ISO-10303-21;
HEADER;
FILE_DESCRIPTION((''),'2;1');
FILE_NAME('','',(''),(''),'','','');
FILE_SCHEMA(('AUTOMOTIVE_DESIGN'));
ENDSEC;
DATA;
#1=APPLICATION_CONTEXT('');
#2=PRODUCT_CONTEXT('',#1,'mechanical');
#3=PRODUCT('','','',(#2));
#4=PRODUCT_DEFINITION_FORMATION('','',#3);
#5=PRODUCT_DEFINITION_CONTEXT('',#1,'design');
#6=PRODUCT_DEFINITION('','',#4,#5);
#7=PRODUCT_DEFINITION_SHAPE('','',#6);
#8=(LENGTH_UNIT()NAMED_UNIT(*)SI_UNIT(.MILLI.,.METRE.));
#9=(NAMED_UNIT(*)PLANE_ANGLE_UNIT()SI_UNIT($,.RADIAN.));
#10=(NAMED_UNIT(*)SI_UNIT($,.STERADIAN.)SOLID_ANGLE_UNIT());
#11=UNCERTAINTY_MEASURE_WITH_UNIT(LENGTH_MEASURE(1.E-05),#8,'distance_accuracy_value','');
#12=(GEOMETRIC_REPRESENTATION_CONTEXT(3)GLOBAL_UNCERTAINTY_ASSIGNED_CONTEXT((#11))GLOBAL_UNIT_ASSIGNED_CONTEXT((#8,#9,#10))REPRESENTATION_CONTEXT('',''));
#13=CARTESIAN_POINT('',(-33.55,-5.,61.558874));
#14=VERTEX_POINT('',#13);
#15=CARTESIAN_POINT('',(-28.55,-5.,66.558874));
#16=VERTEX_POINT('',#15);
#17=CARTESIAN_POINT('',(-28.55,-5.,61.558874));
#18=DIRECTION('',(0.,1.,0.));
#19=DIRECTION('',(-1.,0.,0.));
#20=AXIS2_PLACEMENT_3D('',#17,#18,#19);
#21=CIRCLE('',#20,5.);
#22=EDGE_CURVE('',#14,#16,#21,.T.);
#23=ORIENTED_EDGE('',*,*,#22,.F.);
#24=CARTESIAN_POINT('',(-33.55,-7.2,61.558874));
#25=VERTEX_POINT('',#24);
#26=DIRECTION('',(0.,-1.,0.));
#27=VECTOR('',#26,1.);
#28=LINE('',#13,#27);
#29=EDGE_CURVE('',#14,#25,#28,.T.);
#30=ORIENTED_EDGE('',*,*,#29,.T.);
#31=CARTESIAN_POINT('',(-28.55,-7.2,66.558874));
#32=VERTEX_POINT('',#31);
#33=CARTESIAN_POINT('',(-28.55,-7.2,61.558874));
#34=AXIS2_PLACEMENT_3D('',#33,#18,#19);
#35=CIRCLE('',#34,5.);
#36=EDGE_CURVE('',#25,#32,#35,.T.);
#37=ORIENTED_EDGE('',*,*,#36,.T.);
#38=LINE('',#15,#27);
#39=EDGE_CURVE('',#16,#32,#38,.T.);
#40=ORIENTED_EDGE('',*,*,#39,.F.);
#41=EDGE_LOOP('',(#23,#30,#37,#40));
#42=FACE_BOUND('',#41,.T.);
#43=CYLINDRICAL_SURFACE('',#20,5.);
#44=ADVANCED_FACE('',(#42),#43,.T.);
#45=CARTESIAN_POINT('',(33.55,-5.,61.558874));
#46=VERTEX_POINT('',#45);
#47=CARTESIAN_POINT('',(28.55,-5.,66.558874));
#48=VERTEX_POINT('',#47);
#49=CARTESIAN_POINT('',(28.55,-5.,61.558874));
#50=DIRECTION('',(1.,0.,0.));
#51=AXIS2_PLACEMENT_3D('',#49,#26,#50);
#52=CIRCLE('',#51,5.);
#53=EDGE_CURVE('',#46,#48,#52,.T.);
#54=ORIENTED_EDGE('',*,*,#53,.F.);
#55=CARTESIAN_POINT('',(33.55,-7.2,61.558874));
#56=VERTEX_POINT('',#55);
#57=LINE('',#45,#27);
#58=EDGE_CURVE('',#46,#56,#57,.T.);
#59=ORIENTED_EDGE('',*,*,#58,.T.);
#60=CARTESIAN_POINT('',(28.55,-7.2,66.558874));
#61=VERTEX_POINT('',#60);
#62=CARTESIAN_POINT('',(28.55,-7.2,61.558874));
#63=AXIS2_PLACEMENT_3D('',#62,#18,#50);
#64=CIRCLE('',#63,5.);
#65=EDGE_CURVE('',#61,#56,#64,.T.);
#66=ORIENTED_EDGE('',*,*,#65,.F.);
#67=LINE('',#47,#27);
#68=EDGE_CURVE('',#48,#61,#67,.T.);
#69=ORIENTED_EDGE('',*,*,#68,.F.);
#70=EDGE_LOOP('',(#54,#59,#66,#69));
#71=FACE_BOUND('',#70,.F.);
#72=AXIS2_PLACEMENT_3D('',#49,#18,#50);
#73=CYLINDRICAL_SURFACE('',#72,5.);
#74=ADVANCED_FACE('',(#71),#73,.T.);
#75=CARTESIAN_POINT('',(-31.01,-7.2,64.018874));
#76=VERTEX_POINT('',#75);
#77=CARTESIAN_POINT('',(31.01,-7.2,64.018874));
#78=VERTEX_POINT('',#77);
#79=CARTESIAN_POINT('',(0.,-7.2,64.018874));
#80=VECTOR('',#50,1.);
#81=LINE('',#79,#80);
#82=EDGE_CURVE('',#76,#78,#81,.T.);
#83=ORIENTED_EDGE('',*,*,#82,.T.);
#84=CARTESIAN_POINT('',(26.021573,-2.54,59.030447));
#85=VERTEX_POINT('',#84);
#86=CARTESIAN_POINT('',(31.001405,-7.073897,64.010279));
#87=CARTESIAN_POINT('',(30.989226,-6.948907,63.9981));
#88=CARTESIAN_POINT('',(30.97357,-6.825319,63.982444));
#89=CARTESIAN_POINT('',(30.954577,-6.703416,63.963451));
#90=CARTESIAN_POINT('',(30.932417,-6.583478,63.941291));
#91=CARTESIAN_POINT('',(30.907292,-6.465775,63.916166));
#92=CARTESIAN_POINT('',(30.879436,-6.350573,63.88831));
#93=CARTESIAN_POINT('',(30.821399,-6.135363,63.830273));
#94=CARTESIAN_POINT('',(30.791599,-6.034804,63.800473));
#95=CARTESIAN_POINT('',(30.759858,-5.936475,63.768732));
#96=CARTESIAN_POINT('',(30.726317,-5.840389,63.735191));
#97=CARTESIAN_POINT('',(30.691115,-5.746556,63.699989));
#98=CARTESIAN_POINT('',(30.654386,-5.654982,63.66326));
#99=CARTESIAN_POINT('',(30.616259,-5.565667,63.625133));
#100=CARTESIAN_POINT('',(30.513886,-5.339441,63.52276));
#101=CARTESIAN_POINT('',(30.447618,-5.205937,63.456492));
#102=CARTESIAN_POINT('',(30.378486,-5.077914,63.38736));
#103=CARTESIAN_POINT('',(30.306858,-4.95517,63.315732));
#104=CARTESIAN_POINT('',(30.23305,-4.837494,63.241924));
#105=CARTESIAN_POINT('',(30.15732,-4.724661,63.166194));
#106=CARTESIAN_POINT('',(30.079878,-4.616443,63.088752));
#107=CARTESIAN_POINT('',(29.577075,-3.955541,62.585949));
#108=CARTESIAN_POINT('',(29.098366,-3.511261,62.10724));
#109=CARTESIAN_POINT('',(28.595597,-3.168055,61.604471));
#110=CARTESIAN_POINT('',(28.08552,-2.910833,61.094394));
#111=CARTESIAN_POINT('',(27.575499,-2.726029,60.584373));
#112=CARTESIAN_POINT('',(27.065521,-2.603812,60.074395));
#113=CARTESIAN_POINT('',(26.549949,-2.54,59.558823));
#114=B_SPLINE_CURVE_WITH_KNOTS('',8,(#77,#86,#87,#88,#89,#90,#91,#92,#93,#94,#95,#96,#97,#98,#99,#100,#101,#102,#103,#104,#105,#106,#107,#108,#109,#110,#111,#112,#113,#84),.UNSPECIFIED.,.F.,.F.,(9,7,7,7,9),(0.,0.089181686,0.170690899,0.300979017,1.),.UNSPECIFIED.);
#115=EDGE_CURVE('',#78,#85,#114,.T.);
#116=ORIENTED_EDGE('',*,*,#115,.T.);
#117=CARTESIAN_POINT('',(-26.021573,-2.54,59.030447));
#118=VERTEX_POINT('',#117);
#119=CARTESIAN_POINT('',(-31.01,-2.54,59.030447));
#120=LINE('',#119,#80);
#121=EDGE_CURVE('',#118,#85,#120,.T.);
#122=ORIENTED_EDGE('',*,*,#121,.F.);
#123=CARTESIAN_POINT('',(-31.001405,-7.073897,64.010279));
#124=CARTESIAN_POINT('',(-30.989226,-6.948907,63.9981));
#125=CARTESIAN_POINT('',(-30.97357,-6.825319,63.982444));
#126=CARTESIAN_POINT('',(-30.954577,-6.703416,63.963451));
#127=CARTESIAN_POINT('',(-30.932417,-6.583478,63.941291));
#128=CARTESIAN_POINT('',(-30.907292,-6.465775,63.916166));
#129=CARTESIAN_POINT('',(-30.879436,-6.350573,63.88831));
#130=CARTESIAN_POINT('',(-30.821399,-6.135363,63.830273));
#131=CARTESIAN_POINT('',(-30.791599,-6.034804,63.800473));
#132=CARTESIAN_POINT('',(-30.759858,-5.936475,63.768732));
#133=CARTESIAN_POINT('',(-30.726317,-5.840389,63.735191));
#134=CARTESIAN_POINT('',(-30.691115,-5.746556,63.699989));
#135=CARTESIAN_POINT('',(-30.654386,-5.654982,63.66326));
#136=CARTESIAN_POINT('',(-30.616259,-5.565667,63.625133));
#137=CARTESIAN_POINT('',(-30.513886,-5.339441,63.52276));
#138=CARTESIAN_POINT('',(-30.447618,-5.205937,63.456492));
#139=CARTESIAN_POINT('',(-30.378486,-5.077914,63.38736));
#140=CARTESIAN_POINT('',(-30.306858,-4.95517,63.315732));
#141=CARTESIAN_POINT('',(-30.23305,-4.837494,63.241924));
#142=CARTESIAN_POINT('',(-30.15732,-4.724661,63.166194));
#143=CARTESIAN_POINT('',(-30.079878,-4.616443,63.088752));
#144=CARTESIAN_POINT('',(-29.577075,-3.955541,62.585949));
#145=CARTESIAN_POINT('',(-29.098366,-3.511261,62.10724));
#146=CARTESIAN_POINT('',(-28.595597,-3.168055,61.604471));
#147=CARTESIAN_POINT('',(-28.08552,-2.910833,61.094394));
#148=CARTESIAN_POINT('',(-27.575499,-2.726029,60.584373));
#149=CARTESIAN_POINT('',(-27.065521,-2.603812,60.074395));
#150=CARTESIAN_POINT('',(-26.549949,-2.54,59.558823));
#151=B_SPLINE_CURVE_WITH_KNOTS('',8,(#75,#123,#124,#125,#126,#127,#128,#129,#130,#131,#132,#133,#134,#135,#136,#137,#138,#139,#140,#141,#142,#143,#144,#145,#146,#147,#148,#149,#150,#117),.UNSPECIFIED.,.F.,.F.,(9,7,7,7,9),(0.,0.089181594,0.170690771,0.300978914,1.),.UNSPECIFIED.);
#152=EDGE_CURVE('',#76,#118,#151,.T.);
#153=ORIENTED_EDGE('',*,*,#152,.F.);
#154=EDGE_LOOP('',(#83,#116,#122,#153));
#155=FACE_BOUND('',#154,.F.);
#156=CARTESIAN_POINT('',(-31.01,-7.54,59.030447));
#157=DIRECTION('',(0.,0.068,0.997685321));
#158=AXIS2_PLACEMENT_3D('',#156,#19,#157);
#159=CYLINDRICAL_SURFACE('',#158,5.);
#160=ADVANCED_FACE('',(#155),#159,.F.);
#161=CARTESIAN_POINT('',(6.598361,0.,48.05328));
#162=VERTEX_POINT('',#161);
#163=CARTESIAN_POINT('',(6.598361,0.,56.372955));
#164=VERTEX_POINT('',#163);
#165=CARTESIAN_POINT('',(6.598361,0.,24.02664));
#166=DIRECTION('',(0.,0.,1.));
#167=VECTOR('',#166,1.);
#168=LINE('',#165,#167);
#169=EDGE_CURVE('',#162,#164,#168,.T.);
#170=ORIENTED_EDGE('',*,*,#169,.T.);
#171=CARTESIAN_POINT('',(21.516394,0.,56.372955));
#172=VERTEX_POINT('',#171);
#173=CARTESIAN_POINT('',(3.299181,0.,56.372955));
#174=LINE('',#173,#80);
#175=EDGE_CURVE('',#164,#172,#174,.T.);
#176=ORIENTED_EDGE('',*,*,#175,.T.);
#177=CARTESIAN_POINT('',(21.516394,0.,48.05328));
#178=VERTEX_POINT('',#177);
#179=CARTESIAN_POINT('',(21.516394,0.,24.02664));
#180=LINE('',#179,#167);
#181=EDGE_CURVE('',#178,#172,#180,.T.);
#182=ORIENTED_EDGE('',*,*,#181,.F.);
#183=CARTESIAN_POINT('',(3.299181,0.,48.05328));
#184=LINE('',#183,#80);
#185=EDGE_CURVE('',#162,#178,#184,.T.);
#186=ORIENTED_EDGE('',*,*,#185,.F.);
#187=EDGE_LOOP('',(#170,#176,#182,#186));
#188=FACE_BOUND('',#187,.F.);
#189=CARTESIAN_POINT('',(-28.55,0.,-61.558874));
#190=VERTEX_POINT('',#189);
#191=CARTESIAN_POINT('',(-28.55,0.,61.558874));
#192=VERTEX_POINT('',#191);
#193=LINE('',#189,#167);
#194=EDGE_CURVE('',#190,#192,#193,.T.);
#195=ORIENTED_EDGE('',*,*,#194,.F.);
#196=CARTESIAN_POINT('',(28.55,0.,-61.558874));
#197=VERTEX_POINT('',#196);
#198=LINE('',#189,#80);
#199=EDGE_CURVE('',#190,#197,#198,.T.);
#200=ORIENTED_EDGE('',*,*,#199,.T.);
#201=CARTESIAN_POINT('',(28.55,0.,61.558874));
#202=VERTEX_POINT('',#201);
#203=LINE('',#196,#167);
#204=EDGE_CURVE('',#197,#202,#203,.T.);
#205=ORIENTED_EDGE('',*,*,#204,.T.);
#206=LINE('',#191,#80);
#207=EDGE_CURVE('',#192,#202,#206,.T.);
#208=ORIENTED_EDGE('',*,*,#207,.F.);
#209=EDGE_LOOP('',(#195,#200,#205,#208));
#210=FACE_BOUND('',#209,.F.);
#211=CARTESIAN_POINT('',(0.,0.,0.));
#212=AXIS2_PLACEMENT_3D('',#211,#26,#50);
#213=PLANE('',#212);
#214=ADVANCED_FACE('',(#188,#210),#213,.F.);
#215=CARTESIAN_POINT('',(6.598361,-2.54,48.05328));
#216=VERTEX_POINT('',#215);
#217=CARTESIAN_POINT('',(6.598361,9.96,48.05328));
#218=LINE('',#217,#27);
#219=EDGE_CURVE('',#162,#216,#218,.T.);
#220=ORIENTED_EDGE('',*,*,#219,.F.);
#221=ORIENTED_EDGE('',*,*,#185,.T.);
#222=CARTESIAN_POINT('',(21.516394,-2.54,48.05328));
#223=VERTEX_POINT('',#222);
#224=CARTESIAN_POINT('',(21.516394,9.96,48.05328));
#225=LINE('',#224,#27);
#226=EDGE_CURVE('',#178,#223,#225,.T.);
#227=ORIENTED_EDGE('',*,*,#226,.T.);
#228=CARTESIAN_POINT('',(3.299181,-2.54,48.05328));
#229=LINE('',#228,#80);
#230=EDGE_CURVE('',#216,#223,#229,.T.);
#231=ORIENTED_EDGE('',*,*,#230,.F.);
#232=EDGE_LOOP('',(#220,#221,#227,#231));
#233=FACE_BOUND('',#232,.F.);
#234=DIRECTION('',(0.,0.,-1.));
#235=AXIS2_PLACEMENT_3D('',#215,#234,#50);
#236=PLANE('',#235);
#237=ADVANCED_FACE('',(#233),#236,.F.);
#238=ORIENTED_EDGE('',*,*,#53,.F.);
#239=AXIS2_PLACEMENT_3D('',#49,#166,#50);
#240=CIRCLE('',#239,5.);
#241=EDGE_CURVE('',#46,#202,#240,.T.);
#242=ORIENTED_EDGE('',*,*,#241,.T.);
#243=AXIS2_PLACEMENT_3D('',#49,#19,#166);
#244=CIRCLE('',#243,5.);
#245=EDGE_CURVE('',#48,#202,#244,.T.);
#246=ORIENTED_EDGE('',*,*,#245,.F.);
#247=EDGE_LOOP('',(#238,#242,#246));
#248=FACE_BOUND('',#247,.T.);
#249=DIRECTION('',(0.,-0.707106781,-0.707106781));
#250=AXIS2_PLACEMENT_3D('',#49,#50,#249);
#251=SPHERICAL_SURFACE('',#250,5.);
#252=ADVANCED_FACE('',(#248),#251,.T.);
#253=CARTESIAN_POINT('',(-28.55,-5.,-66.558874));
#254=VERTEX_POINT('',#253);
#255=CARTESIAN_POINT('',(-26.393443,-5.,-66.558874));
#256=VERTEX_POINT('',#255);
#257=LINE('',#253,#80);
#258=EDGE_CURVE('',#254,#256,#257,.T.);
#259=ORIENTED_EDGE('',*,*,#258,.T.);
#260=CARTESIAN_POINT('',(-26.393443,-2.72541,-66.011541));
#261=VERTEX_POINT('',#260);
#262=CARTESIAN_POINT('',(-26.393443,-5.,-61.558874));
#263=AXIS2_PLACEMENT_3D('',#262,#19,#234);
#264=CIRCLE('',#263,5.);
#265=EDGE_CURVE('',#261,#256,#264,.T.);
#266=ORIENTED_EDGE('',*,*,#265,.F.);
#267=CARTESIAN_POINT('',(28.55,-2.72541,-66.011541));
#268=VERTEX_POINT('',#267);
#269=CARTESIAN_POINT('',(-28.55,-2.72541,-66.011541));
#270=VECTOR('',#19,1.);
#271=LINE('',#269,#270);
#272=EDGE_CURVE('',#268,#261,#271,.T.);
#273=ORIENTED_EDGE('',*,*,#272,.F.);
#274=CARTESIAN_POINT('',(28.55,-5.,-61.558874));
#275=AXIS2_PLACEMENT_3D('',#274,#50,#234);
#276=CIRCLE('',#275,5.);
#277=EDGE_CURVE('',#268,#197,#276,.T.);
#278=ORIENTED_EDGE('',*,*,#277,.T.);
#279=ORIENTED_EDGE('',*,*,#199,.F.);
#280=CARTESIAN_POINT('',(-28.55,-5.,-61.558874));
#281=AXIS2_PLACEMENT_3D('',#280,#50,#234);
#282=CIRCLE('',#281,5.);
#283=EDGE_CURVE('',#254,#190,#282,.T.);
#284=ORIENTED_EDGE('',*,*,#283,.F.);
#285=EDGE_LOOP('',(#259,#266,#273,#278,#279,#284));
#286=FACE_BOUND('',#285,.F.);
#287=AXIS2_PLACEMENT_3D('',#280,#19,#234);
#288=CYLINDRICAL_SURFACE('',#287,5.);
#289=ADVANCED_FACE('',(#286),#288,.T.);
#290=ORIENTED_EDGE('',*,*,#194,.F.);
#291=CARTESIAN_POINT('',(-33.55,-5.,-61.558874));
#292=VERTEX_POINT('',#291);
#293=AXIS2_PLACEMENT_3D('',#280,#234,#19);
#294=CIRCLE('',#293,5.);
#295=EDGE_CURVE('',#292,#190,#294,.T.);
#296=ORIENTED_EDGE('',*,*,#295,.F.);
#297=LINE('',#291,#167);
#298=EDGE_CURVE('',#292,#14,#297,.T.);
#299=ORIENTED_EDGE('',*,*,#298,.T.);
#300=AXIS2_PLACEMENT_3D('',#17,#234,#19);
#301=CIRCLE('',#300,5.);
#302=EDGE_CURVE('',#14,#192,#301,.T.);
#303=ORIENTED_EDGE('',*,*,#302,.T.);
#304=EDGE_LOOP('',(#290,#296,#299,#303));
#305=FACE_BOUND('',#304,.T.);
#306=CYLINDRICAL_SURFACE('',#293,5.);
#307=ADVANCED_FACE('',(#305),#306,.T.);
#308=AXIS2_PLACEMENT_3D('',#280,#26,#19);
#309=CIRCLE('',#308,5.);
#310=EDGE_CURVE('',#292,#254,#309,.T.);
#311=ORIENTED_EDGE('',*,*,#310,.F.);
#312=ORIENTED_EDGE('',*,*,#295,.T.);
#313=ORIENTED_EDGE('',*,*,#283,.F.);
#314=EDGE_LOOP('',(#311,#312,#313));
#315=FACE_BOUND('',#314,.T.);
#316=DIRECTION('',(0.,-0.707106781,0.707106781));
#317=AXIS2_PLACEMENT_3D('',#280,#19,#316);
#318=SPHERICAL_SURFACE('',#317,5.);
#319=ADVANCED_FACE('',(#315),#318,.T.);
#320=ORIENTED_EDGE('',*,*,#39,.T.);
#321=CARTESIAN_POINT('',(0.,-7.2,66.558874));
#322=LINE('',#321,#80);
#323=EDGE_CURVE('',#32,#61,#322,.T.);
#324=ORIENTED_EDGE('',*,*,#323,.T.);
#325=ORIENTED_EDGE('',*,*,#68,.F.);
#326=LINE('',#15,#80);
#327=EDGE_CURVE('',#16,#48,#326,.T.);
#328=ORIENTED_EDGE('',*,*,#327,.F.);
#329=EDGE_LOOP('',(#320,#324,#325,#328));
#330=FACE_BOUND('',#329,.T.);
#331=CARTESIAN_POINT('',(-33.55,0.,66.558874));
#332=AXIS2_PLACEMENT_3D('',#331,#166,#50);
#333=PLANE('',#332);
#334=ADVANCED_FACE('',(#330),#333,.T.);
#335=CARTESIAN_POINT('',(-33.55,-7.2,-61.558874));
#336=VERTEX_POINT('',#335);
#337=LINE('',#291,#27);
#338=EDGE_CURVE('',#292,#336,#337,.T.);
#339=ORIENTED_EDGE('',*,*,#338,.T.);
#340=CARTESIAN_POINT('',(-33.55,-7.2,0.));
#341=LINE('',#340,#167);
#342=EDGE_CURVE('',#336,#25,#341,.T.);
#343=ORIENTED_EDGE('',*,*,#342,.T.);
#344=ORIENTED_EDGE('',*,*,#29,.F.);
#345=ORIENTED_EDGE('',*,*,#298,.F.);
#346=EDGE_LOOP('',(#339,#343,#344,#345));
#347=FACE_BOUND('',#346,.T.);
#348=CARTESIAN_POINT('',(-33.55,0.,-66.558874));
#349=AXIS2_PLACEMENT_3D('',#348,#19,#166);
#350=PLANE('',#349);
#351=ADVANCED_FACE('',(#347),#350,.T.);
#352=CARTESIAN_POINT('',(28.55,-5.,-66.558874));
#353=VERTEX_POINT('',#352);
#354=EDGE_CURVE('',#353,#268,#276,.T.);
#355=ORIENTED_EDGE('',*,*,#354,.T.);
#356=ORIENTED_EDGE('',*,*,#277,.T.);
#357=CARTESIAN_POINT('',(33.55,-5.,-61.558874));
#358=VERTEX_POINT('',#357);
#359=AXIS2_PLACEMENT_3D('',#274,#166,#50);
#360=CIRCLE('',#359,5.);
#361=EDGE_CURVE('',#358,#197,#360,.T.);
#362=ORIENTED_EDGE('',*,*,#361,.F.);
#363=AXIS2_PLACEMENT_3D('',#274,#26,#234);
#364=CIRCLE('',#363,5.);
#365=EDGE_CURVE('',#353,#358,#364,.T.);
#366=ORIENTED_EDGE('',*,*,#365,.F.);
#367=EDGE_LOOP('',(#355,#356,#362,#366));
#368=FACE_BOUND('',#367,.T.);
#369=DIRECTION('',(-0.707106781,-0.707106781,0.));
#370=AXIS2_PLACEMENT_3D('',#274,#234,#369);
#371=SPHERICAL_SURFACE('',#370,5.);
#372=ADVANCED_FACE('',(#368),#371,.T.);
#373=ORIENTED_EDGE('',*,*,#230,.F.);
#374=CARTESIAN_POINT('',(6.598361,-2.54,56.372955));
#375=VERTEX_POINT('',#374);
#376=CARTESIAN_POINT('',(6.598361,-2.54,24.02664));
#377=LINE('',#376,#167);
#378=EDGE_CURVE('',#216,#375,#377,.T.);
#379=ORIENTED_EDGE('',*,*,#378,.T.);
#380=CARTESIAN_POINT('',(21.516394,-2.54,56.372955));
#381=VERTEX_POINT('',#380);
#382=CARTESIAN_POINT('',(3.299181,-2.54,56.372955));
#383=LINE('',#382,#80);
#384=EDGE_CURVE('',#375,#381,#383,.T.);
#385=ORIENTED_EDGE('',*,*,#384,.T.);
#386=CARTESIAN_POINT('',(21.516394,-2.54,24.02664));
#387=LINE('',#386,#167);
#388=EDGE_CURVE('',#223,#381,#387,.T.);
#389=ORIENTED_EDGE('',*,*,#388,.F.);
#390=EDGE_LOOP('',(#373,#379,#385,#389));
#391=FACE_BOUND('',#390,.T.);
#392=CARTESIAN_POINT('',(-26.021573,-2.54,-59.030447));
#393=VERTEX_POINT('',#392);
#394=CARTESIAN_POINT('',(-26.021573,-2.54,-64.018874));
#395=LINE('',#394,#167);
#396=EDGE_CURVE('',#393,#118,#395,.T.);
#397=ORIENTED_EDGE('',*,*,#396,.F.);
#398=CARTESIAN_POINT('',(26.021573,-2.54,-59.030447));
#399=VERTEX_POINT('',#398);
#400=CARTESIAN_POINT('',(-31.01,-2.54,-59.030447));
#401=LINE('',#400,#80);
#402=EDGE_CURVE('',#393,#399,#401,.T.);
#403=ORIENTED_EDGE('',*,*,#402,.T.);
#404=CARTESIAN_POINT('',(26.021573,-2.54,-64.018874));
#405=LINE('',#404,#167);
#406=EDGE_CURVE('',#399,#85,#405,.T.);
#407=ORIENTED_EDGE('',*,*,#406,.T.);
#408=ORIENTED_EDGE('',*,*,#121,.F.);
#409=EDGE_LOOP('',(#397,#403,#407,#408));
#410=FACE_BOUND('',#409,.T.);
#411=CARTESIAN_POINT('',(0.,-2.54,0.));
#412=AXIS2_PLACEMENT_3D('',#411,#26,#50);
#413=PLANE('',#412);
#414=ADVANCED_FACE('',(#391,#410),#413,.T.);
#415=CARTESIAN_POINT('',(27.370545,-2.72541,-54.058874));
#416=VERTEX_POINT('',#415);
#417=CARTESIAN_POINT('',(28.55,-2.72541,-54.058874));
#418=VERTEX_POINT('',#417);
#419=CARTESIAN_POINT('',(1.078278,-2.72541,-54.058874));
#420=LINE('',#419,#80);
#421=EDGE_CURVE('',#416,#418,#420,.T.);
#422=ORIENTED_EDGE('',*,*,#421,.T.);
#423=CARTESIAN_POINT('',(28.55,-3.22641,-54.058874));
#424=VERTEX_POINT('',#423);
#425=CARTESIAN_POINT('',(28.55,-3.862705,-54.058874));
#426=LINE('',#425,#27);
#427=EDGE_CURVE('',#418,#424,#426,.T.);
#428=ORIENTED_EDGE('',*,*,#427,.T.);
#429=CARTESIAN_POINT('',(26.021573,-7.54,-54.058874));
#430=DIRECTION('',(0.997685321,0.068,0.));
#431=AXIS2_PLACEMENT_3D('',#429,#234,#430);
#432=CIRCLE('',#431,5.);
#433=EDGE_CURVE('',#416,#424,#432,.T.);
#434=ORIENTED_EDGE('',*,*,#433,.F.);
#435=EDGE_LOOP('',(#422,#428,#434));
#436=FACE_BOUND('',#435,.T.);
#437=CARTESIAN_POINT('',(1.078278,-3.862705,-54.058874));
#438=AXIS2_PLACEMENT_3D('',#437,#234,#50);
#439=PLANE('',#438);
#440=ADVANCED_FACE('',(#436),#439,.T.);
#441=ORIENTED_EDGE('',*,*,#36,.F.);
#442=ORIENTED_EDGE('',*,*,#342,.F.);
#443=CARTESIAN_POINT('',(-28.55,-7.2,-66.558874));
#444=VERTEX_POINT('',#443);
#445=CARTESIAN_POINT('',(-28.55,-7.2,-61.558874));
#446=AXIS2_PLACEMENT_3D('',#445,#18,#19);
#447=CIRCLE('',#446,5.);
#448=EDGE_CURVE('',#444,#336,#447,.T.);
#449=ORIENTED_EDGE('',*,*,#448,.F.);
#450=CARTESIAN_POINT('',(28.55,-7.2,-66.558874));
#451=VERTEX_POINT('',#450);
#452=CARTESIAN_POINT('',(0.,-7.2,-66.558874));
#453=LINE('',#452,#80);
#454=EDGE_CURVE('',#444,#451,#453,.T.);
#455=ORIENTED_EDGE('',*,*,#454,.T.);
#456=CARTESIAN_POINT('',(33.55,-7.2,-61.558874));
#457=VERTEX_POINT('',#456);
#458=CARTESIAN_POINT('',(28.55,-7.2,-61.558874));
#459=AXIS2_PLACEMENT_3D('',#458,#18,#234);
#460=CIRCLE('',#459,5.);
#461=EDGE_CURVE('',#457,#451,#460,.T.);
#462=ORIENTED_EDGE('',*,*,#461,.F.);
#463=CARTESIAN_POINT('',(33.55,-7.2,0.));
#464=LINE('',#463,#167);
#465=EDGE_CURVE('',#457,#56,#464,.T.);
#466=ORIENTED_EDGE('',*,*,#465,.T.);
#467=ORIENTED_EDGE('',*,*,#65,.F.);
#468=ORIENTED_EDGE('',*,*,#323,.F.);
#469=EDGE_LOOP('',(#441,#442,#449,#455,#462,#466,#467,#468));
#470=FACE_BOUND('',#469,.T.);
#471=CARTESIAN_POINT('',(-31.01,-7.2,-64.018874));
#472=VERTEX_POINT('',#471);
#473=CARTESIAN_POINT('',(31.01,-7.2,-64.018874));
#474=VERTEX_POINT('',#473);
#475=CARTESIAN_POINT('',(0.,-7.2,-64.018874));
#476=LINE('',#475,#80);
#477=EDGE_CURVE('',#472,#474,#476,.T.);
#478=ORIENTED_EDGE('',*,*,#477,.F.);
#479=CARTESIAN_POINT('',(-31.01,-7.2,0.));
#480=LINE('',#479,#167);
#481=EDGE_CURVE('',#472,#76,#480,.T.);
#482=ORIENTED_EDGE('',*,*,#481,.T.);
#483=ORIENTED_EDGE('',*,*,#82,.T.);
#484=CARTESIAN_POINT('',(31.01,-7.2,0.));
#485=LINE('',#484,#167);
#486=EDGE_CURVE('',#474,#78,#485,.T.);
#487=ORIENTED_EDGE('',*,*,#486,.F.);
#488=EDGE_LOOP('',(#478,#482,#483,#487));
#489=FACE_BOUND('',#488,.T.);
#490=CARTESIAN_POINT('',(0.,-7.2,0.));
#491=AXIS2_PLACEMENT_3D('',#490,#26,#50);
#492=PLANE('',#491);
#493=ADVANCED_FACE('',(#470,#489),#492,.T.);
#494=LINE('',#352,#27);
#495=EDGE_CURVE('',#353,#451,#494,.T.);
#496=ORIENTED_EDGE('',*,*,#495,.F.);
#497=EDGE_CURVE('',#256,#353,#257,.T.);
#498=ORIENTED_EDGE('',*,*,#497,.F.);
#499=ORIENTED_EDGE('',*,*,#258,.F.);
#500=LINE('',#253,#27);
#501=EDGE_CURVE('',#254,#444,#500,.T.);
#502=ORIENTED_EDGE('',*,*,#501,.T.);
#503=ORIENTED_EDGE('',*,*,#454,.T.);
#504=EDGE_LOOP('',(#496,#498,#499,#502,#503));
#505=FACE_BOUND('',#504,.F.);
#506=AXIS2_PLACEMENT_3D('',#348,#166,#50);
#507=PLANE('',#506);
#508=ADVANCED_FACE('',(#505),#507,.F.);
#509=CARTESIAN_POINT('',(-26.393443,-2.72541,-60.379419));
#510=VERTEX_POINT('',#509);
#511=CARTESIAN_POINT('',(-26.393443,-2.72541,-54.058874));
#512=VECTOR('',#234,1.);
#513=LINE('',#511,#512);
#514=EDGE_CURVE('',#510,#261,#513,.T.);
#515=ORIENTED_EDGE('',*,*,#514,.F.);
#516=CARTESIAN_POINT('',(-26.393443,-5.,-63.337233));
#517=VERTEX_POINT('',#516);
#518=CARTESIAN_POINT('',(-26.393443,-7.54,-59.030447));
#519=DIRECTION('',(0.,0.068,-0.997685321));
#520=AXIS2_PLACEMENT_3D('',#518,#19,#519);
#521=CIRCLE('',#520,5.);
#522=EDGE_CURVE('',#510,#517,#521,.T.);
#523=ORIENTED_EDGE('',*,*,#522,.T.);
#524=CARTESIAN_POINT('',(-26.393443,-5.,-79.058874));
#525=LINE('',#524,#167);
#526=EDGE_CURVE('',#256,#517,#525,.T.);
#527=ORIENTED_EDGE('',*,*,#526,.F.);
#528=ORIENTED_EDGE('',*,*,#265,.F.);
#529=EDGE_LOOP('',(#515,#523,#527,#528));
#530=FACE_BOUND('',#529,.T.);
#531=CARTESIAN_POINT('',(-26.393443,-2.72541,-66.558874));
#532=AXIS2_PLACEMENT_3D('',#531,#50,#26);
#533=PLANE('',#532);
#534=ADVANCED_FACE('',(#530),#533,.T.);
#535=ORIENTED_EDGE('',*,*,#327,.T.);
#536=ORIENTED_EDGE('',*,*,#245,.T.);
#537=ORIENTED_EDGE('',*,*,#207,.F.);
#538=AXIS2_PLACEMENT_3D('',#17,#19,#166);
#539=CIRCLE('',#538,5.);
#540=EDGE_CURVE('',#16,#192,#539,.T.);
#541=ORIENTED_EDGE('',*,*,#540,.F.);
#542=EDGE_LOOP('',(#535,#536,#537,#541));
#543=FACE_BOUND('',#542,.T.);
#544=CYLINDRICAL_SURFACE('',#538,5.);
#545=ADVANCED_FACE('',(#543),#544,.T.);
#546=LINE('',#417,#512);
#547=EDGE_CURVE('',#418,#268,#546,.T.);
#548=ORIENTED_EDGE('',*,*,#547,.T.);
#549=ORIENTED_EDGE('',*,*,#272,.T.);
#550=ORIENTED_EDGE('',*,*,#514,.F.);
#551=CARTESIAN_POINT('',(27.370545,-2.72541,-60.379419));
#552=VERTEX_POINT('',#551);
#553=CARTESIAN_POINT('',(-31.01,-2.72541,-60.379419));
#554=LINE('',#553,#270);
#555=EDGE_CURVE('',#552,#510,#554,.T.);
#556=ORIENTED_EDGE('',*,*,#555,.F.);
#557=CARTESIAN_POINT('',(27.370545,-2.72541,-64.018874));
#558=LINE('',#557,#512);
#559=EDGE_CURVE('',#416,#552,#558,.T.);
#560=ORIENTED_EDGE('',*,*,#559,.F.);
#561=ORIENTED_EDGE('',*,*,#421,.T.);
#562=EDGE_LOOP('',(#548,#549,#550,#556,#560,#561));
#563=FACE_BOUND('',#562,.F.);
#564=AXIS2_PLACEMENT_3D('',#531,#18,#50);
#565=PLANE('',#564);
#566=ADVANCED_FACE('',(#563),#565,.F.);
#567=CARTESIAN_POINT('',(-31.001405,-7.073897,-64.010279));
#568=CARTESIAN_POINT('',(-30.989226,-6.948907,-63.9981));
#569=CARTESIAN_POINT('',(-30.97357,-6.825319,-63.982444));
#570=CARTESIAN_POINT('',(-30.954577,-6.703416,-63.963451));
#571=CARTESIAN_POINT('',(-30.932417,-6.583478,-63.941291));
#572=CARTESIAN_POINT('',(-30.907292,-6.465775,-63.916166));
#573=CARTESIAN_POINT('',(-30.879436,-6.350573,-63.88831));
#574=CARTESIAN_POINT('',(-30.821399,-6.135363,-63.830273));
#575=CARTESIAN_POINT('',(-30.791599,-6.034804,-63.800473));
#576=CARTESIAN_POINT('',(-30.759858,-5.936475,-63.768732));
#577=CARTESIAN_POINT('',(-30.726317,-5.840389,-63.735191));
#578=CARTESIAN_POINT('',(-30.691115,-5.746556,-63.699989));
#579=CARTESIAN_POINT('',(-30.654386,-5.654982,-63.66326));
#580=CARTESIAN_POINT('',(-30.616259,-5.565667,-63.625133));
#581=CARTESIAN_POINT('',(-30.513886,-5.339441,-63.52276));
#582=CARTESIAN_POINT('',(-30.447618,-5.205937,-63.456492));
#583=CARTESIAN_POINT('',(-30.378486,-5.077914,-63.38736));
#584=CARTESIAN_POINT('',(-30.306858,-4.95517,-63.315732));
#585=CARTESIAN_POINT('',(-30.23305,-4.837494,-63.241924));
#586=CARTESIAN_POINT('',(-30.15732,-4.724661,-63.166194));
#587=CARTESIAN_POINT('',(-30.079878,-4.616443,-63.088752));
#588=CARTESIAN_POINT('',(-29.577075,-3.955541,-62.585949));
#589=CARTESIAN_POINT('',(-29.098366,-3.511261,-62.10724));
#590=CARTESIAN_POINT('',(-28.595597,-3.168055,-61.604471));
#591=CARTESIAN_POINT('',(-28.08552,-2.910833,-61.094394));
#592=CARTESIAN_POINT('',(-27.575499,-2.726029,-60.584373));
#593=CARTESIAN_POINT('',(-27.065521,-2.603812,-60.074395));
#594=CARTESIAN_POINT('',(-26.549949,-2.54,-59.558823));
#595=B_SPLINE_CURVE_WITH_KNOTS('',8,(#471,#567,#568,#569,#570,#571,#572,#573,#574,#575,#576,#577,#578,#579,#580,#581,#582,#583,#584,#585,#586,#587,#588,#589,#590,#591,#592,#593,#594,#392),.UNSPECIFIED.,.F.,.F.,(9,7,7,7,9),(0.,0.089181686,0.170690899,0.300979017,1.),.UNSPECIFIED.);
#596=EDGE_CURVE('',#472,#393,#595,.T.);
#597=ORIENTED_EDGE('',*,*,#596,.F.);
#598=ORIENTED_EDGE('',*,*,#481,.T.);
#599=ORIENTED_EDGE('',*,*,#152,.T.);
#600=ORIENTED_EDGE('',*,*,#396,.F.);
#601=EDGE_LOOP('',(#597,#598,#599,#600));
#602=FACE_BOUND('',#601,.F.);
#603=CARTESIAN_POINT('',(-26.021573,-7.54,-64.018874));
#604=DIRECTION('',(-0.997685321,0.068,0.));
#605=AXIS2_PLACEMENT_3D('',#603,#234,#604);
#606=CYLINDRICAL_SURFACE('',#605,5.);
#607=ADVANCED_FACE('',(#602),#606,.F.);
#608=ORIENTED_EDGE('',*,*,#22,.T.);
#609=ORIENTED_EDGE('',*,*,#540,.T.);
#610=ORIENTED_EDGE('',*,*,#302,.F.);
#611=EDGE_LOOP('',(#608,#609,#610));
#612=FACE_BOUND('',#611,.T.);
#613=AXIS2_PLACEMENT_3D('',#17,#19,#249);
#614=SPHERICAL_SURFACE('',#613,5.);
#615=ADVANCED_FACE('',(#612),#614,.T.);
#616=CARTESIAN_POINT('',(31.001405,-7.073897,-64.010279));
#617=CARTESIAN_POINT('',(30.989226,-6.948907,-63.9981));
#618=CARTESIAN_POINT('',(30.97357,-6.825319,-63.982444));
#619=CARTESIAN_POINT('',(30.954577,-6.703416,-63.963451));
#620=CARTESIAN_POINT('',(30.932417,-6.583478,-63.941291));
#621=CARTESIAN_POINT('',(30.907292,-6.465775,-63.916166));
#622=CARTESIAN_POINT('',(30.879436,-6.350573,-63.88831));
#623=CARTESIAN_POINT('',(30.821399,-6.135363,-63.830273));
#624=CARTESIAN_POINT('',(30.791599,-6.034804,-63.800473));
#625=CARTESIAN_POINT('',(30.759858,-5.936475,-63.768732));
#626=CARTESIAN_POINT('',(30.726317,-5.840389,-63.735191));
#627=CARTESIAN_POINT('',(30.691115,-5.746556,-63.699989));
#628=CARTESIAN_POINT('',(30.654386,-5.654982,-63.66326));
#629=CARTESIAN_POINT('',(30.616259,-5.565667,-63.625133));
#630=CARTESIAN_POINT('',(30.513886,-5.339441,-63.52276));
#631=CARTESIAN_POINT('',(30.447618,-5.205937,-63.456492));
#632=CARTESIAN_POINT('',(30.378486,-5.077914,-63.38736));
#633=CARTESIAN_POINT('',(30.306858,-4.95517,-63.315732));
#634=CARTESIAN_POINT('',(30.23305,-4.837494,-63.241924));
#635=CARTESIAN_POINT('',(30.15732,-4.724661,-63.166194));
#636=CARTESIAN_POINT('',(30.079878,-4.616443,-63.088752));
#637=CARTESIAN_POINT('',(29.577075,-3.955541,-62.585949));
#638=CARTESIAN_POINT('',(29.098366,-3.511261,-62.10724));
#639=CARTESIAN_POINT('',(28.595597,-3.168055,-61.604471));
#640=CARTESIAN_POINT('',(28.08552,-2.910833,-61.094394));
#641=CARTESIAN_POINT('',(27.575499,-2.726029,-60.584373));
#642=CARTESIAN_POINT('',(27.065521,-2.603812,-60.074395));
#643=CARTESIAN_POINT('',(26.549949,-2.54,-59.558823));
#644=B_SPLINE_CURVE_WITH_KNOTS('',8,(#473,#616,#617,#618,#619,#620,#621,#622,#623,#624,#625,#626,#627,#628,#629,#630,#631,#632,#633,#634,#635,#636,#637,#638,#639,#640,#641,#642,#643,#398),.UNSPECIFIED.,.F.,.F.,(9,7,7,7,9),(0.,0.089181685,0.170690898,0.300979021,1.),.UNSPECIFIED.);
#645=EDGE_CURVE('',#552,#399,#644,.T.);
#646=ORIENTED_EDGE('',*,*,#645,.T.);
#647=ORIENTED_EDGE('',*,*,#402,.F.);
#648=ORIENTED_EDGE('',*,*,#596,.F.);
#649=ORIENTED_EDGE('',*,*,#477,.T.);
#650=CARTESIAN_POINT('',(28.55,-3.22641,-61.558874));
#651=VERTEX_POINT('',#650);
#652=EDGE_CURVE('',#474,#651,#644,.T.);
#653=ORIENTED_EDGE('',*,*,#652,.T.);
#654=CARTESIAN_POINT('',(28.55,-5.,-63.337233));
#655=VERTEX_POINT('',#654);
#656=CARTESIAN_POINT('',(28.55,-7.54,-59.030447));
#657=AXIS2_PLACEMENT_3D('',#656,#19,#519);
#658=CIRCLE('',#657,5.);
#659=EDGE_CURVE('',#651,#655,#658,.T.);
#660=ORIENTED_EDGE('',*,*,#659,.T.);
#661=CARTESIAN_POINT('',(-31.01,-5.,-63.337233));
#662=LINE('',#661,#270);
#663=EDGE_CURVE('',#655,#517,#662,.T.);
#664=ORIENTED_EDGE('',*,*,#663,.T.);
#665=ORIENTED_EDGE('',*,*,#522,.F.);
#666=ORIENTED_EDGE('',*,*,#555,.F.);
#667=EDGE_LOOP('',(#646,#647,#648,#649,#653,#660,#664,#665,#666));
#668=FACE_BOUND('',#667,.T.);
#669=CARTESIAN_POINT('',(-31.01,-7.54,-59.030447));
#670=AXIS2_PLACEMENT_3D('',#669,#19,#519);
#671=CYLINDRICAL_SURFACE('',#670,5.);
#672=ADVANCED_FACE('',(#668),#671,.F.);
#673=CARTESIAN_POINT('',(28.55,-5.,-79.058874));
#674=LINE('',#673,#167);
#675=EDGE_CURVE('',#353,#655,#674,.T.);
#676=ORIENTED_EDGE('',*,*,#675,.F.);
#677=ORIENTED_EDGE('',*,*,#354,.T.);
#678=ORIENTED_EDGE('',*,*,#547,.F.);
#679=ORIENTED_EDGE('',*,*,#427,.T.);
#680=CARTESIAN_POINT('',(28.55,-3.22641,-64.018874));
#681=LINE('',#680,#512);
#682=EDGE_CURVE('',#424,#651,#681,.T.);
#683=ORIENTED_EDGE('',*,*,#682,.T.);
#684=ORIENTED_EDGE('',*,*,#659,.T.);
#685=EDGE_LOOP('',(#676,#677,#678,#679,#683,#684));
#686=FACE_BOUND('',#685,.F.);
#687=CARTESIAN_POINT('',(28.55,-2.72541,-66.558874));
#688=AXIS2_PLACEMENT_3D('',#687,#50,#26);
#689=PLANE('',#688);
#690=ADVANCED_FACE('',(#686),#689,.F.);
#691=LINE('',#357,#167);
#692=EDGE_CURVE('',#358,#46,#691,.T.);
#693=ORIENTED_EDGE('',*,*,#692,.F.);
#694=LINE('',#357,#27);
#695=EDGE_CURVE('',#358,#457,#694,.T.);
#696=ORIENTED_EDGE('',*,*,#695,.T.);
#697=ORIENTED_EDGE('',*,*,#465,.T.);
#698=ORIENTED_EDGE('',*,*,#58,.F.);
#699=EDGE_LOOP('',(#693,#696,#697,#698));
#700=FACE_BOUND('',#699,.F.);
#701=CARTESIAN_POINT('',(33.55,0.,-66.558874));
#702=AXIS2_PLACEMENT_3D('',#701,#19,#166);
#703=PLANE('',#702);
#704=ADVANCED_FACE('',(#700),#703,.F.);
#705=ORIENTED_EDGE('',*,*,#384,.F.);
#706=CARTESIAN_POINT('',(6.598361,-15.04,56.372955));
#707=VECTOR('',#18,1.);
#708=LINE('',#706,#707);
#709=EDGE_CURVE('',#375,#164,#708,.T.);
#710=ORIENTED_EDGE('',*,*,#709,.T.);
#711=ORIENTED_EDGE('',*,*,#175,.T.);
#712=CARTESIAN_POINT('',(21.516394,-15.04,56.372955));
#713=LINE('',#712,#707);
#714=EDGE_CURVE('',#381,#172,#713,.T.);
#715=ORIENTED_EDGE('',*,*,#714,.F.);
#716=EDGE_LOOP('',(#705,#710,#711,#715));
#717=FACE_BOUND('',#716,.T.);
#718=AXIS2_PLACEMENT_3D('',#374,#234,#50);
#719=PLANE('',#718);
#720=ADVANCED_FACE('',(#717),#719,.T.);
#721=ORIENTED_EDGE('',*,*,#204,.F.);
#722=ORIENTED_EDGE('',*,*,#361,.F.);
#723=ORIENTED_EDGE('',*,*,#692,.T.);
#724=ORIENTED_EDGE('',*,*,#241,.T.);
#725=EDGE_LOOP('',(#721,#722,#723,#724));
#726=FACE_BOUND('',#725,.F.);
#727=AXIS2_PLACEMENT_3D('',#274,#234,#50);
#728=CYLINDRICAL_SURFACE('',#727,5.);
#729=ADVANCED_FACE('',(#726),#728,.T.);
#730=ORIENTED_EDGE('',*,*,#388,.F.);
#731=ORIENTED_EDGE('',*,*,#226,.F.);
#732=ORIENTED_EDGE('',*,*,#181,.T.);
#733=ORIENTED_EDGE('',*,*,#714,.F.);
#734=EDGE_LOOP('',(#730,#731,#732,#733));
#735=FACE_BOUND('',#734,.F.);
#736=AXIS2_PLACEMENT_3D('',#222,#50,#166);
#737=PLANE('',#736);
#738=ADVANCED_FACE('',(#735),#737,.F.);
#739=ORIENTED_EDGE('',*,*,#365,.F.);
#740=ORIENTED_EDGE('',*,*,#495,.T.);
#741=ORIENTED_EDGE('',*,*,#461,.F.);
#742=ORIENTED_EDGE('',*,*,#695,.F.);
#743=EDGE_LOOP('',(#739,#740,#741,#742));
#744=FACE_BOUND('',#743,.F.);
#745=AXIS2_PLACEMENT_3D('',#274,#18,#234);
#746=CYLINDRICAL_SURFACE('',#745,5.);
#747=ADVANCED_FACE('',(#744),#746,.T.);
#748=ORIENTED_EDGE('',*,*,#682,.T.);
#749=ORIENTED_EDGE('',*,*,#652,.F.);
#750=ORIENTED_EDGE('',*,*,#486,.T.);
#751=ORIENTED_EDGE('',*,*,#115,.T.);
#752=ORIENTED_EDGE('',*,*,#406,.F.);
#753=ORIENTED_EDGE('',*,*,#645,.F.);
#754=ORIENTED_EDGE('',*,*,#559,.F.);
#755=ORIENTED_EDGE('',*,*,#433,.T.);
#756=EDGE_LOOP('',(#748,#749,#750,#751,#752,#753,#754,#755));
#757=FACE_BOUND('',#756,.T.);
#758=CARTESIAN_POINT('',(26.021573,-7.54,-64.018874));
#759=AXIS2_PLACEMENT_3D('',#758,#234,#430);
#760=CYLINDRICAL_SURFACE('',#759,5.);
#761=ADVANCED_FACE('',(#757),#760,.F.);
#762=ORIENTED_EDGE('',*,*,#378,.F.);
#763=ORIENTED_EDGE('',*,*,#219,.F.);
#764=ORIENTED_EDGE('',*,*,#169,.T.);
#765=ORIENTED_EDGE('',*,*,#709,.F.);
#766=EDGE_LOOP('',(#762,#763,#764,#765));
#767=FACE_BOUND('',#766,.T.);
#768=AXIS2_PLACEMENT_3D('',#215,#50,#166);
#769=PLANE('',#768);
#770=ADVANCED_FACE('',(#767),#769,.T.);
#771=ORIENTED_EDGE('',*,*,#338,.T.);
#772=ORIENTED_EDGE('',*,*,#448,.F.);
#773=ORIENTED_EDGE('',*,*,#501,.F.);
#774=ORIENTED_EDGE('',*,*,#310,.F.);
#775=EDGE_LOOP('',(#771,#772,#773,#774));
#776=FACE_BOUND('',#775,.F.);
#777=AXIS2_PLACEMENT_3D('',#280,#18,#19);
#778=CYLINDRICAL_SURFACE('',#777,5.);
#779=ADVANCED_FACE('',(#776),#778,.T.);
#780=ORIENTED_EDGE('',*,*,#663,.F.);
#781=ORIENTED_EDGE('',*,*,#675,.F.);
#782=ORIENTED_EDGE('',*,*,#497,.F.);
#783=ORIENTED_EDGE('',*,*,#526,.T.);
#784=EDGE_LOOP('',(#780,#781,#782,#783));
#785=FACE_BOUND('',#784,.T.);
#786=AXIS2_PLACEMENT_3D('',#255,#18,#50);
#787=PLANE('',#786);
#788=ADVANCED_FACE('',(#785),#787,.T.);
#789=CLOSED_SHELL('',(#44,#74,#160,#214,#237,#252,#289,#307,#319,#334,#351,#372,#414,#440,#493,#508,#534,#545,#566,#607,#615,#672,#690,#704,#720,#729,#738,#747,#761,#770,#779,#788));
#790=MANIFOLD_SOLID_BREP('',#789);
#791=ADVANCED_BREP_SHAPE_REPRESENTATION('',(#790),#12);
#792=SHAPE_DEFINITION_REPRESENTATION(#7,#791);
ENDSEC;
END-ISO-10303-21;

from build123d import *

# Parameters (mm, degrees)
F0_W         = 67.1
F0_H         = 133.1177479803
F1_DEPTH     = 7.2
F2_T         = -2.54
F3_T1_DEPTH  = 123.1177479803
F3_T3_DEPTH  = 57.1
F3_T5_DEPTH  = 14.7
F3_S9_W      = 5.1
F3_S9_H      = 5.1
F3_T10_DEPTH = 5.1
F3_S15_W     = 5.1
F3_S15_H     = 5.1
F3_T16_DEPTH = 5.1
F3_S21_W     = 5.1
F3_S21_H     = 5.1
F3_T22_DEPTH = 5.1
F3_S27_W     = 5.1
F3_S27_H     = 5.1
F3_T28_DEPTH = 5.1
F3_T31_DEPTH = 128.0377479803
F3_T33_DEPTH = 62.02
F3_T39_DEPTH = 140.5088144944
F3_T43_DEPTH = 74.4910665141
F3_T50_DEPTH = 140.5088144944
F3_T54_DEPTH = 74.4910665141
F3_T61_DEPTH = 74.4910665141
F3_T65_DEPTH = 140.5088144944
F3_T72_DEPTH = 74.4910665141
F3_T76_DEPTH = 140.5088144944
F4_W         = 14.9180325679
F4_H         = 8.3196759224
F5_DEPTH     = 12.5
F6_W         = 54.943443346
F6_H         = 2.2745899577
F7_DEPTH     = 12.5


# Not quite as in the source:
# - a fillet or chamfer that OpenCascade refuses, or shapes differently, is made with other operations: its cross-section is extruded or revolved along the edge and cut away or added


with BuildPart() as f1:
    # F0 (on Front) → F1 (new body)
    with BuildSketch(Plane.XZ):
        Rectangle(F0_W, F0_H)
    extrude(amount=F1_DEPTH)

    # F2
    f2_openings = [f1.faces().sort_by_distance(p)[0] for p in [
        (0, -7.2, 0),
    ]]
    offset(amount=F2_T, openings=f2_openings)

    # F3: fillet of radius 5 on 12 edges, made by hand

    # F3_s2 → F3_t1 (cut)
    with BuildSketch(Plane.XY.offset(-61.5588739901)):
        with BuildLine():
            ThreePointArc((-33.55, -5), (-32.0855339059, -1.4644660941), (-28.55, 0))
            Line((-28.55, 0), (-28.55, 0.1))
            Line((-28.55, 0.1), (-33.65, 0.1))
            Line((-33.65, 0.1), (-33.65, -5))
            Line((-33.65, -5), (-33.55, -5))
        make_face()
        with BuildLine():
            ThreePointArc((33.55, -5), (32.0855339059, -1.4644660941), (28.55, 0))
            Line((28.55, 0), (28.55, 0.1))
            Line((28.55, 0.1), (33.65, 0.1))
            Line((33.65, 0.1), (33.65, -5))
            Line((33.65, -5), (33.55, -5))
        make_face()
    extrude(amount=F3_T1_DEPTH, mode=Mode.SUBTRACT)

    # F3_s4 → F3_t3 (cut)
    with BuildSketch(Plane.YZ.offset(-28.55)):
        with BuildLine():
            ThreePointArc((-5, -66.5588739901), (-1.4644660941, -65.0944078961), (0, -61.5588739901))
            Line((0, -61.5588739901), (0.1, -61.5588739901))
            Line((0.1, -61.5588739901), (0.1, -66.6588739901))
            Line((0.1, -66.6588739901), (-5, -66.6588739901))
            Line((-5, -66.6588739901), (-5, -66.5588739901))
        make_face()
        with BuildLine():
            ThreePointArc((-5, 66.5588739901), (-1.4644660941, 65.0944078961), (0, 61.5588739901))
            Line((0, 61.5588739901), (0.1, 61.5588739901))
            Line((0.1, 61.5588739901), (0.1, 66.6588739901))
            Line((0.1, 66.6588739901), (-5, 66.6588739901))
            Line((-5, 66.6588739901), (-5, 66.5588739901))
        make_face()
    extrude(amount=F3_T3_DEPTH, mode=Mode.SUBTRACT)

    # F3_s6 → F3_t5 (cut)
    with BuildSketch(Plane.XZ.offset(5)):
        with BuildLine():
            ThreePointArc((33.55, 61.5588739901), (32.0855339059, 65.0944078961), (28.55, 66.5588739901))
            Line((28.55, 66.5588739901), (28.55, 66.6588739901))
            Line((28.55, 66.6588739901), (33.65, 66.6588739901))
            Line((33.65, 66.6588739901), (33.65, 61.5588739901))
            Line((33.65, 61.5588739901), (33.55, 61.5588739901))
        make_face()
        with BuildLine():
            ThreePointArc((-33.55, 61.5588739901), (-32.0855339059, 65.0944078961), (-28.55, 66.5588739901))
            Line((-28.55, 66.5588739901), (-28.55, 66.6588739901))
            Line((-28.55, 66.6588739901), (-33.65, 66.6588739901))
            Line((-33.65, 66.6588739901), (-33.65, 61.5588739901))
            Line((-33.65, 61.5588739901), (-33.55, 61.5588739901))
        make_face()
        with BuildLine():
            ThreePointArc((-33.55, -61.5588739901), (-32.0855339059, -65.0944078961), (-28.55, -66.5588739901))
            Line((-28.55, -66.5588739901), (-28.55, -66.6588739901))
            Line((-28.55, -66.6588739901), (-33.65, -66.6588739901))
            Line((-33.65, -66.6588739901), (-33.65, -61.5588739901))
            Line((-33.65, -61.5588739901), (-33.55, -61.5588739901))
        make_face()
        with BuildLine():
            ThreePointArc((28.55, -66.5588739901), (32.0855339059, -65.0944078961), (33.55, -61.5588739901))
            Line((33.55, -61.5588739901), (33.65, -61.5588739901))
            Line((33.65, -61.5588739901), (33.65, -66.6588739901))
            Line((33.65, -66.6588739901), (28.55, -66.6588739901))
            Line((28.55, -66.6588739901), (28.55, -66.5588739901))
        make_face()
    extrude(amount=F3_T5_DEPTH, mode=Mode.SUBTRACT)


with BuildPart() as f3_tool8:
    # F3_s9 → F3_t10 (new body)
    with BuildSketch(Plane.YZ.offset(-28.55)):
        with Locations((-2.45, 64.1088739901)):
            Rectangle(F3_S9_W, F3_S9_H)
    extrude(amount=-F3_T10_DEPTH)

    # F3_s11 → F3_t12 (revolve, cut)
    with BuildSketch(Plane(origin=(-28.55, -5, 61.5588739901), x_dir=(0, -0.7071067812, -0.7071067812), z_dir=(0, 0.7071067812, -0.7071067812))):
        with BuildLine():
            ThreePointArc((0, -5), (5, 0), (0, 5))
            Line((0, 5), (0, -5))
        make_face()
    revolve(axis=Axis((-28.55, -5, 61.5588739901), (-1, 0, 0)), mode=Mode.SUBTRACT)


with BuildPart() as f1_1:
    add(f1.part)

    # F3_t7: cut F3_tool8
    add(f3_tool8.part, mode=Mode.SUBTRACT)


with BuildPart() as f3_tool14:
    # F3_s15 → F3_t16 (new body)
    with BuildSketch(Plane.YZ.offset(-28.55)):
        with Locations((-2.45, -64.1088739901)):
            Rectangle(F3_S15_W, F3_S15_H)
    extrude(amount=-F3_T16_DEPTH)

    # F3_s17 → F3_t18 (revolve, cut)
    with BuildSketch(Plane(origin=(-28.55, -5, -61.5588739901), x_dir=(0, -0.7071067812, 0.7071067812), z_dir=(0, -0.7071067812, -0.7071067812))):
        with BuildLine():
            ThreePointArc((0, -5), (5, 0), (0, 5))
            Line((0, 5), (0, -5))
        make_face()
    revolve(axis=Axis((-28.55, -5, -61.5588739901), (-1, 0, 0)), mode=Mode.SUBTRACT)


with BuildPart() as f1_2:
    add(f1_1.part)

    # F3_t13: cut F3_tool14
    add(f3_tool14.part, mode=Mode.SUBTRACT)


with BuildPart() as f3_tool20:
    # F3_s21 → F3_t22 (new body)
    with BuildSketch(Plane.XY.offset(-61.5588739901)):
        with Locations((31.1, -2.45)):
            Rectangle(F3_S21_W, F3_S21_H)
    extrude(amount=-F3_T22_DEPTH)

    # F3_s23 → F3_t24 (revolve, cut)
    with BuildSketch(Plane(origin=(28.55, -5, -61.5588739901), x_dir=(-0.7071067812, -0.7071067812, 0), z_dir=(0.7071067812, -0.7071067812, 0))):
        with BuildLine():
            ThreePointArc((0, -5), (5, 0), (0, 5))
            Line((0, 5), (0, -5))
        make_face()
    revolve(axis=Axis((28.55, -5, -61.5588739901), (0, 0, -1)), mode=Mode.SUBTRACT)


with BuildPart() as f1_3:
    add(f1_2.part)

    # F3_t19: cut F3_tool20
    add(f3_tool20.part, mode=Mode.SUBTRACT)


with BuildPart() as f3_tool26:
    # F3_s27 → F3_t28 (new body)
    with BuildSketch(Plane.YZ.offset(28.55)):
        with Locations((-2.45, 64.1088739901)):
            Rectangle(F3_S27_W, F3_S27_H)
    extrude(amount=F3_T28_DEPTH)

    # F3_s29 → F3_t30 (revolve, cut)
    with BuildSketch(Plane(origin=(28.55, -5, 61.5588739901), x_dir=(0, -0.7071067812, -0.7071067812), z_dir=(0, -0.7071067812, 0.7071067812))):
        with BuildLine():
            ThreePointArc((0, -5), (5, 0), (0, 5))
            Line((0, 5), (0, -5))
        make_face()
    revolve(axis=Axis((28.55, -5, 61.5588739901), (1, 0, 0)), mode=Mode.SUBTRACT)


with BuildPart() as f1_4:
    add(f1_3.part)

    # F3_t25: cut F3_tool26
    add(f3_tool26.part, mode=Mode.SUBTRACT)

    # F3_s32 → F3_t31 (join)
    with BuildSketch(Plane.XY.offset(-64.0188739901)):
        with BuildLine():
            ThreePointArc((-31.01, -7.2), (-29.4347830275, -3.8862348187), (-26.0215733943, -2.54))
            Line((-26.0215733943, -2.54), (-26.0215733943, -2.44))
            Line((-26.0215733943, -2.44), (-31.01, -2.44))
            Line((-31.01, -2.44), (-31.11, -2.54))
            ThreePointArc((-31.11, -2.54), (-31.11, -4.87), (-31.1097685321, -7.1932))
            Line((-31.1097685321, -7.1932), (-31.01, -7.2))
        make_face()
        with BuildLine():
            ThreePointArc((31.01, -7.2), (29.4347830275, -3.8862348187), (26.0215733943, -2.54))
            Line((26.0215733943, -2.54), (26.0215733943, -2.44))
            Line((26.0215733943, -2.44), (31.01, -2.44))
            Line((31.01, -2.44), (31.11, -2.54))
            ThreePointArc((31.11, -2.54), (31.11, -4.87), (31.1097685321, -7.1932))
            Line((31.1097685321, -7.1932), (31.01, -7.2))
        make_face()
    extrude(amount=F3_T31_DEPTH)

    # F3_s34 → F3_t33 (join)
    with BuildSketch(Plane.YZ.offset(-31.01)):
        with BuildLine():
            ThreePointArc((-7.2, -64.0188739901), (-3.8862348187, -62.4436570177), (-2.54, -59.0304473845))
            Line((-2.54, -59.0304473845), (-2.44, -59.0304473845))
            Line((-2.44, -59.0304473845), (-2.44, -64.0188739901))
            Line((-2.44, -64.0188739901), (-2.54, -64.1188739901))
            ThreePointArc((-2.54, -64.1188739901), (-4.87, -64.1188739901), (-7.1932, -64.1186425223))
            Line((-7.1932, -64.1186425223), (-7.2, -64.0188739901))
        make_face()
        with BuildLine():
            ThreePointArc((-7.2, 64.0188739901), (-3.8862348187, 62.4436570177), (-2.54, 59.0304473845))
            Line((-2.54, 59.0304473845), (-2.44, 59.0304473845))
            Line((-2.44, 59.0304473845), (-2.44, 64.0188739901))
            Line((-2.44, 64.0188739901), (-2.54, 64.1188739901))
            ThreePointArc((-2.54, 64.1188739901), (-4.87, 64.1188739901), (-7.1932, 64.1186425223))
            Line((-7.1932, 64.1186425223), (-7.2, 64.0188739901))
        make_face()
    extrude(amount=F3_T33_DEPTH)


with BuildPart() as f3_tool37:
    # F3_s38 → F3_t39 (new body)
    with BuildSketch(Plane.XY.offset(76.4899405043)):
        with BuildLine():
            ThreePointArc((-31.01, -7.2), (-29.4347830275, -3.8862348187), (-26.0215733943, -2.54))
            Line((-26.0215733943, -2.54), (-26.0215733943, -2.44))
            Line((-26.0215733943, -2.44), (-31.01, -2.44))
            Line((-31.01, -2.44), (-31.11, -2.54))
            ThreePointArc((-31.11, -2.54), (-31.11, -4.87), (-31.1097685321, -7.1932))
            Line((-31.1097685321, -7.1932), (-31.01, -7.2))
        make_face()
    extrude(amount=-F3_T39_DEPTH)

    split(bisect_by=Plane.XY.offset(64.0188739901), keep=Keep.TOP)


with BuildPart() as f3_tool41:
    # F3_s42 → F3_t43 (new body)
    with BuildSketch(Plane.YZ.offset(31.01)):
        with BuildLine():
            ThreePointArc((-7.2, 64.0188739901), (-3.8862348187, 62.4436570177), (-2.54, 59.0304473845))
            Line((-2.54, 59.0304473845), (-2.44, 59.0304473845))
            Line((-2.44, 59.0304473845), (-2.44, 64.0188739901))
            Line((-2.44, 64.0188739901), (-2.54, 64.1188739901))
            ThreePointArc((-2.54, 64.1188739901), (-4.87, 64.1188739901), (-7.1932, 64.1186425223))
            Line((-7.1932, 64.1186425223), (-7.2, 64.0188739901))
        make_face()
    extrude(amount=-F3_T43_DEPTH)

    split(bisect_by=Plane.YZ.offset(-31.01), keep=Keep.BOTTOM)


with BuildPart() as f3_tool37_1:
    add(f3_tool37.part)

    # F3_t45: intersect F3_tool41
    add(f3_tool41.part, mode=Mode.INTERSECT)


with BuildPart() as f1_5:
    add(f1_4.part)

    # F3_t35: union F3_tool37
    add(f3_tool37_1.part)


with BuildPart() as f3_tool48:
    # F3_s49 → F3_t50 (new body)
    with BuildSketch(Plane.XY.offset(64.0188739901)):
        with BuildLine():
            ThreePointArc((-31.01, -7.2), (-29.4347830275, -3.8862348187), (-26.0215733943, -2.54))
            Line((-26.0215733943, -2.54), (-26.0215733943, -2.44))
            Line((-26.0215733943, -2.44), (-31.01, -2.44))
            Line((-31.01, -2.44), (-31.11, -2.54))
            ThreePointArc((-31.11, -2.54), (-31.11, -4.87), (-31.1097685321, -7.1932))
            Line((-31.1097685321, -7.1932), (-31.01, -7.2))
        make_face()
    extrude(amount=-F3_T50_DEPTH)

    split(bisect_by=Plane.XY.offset(-64.0188739901), keep=Keep.BOTTOM)


with BuildPart() as f3_tool52:
    # F3_s53 → F3_t54 (new body)
    with BuildSketch(Plane.YZ.offset(-43.4810665141)):
        with BuildLine():
            ThreePointArc((-7.2, -64.0188739901), (-3.8862348187, -62.4436570177), (-2.54, -59.0304473845))
            Line((-2.54, -59.0304473845), (-2.44, -59.0304473845))
            Line((-2.44, -59.0304473845), (-2.44, -64.0188739901))
            Line((-2.44, -64.0188739901), (-2.54, -64.1188739901))
            ThreePointArc((-2.54, -64.1188739901), (-4.87, -64.1188739901), (-7.1932, -64.1186425223))
            Line((-7.1932, -64.1186425223), (-7.2, -64.0188739901))
        make_face()
    extrude(amount=F3_T54_DEPTH)

    split(bisect_by=Plane.YZ.offset(-31.01), keep=Keep.BOTTOM)


with BuildPart() as f3_tool48_1:
    add(f3_tool48.part)

    # F3_t56: intersect F3_tool52
    add(f3_tool52.part, mode=Mode.INTERSECT)


with BuildPart() as f1_6:
    add(f1_5.part)

    # F3_t46: union F3_tool48
    add(f3_tool48_1.part)


with BuildPart() as f3_tool59:
    # F3_s60 → F3_t61 (new body)
    with BuildSketch(Plane.YZ.offset(-31.01)):
        with BuildLine():
            ThreePointArc((-7.2, -64.0188739901), (-3.8862348187, -62.4436570177), (-2.54, -59.0304473845))
            Line((-2.54, -59.0304473845), (-2.44, -59.0304473845))
            Line((-2.44, -59.0304473845), (-2.44, -64.0188739901))
            Line((-2.44, -64.0188739901), (-2.54, -64.1188739901))
            ThreePointArc((-2.54, -64.1188739901), (-4.87, -64.1188739901), (-7.1932, -64.1186425223))
            Line((-7.1932, -64.1186425223), (-7.2, -64.0188739901))
        make_face()
    extrude(amount=F3_T61_DEPTH)

    split(bisect_by=Plane.YZ.offset(31.01), keep=Keep.TOP)


with BuildPart() as f3_tool63:
    # F3_s64 → F3_t65 (new body)
    with BuildSketch(Plane.XY.offset(-76.4899405043)):
        with BuildLine():
            ThreePointArc((31.01, -7.2), (29.4347830275, -3.8862348187), (26.0215733943, -2.54))
            Line((26.0215733943, -2.54), (26.0215733943, -2.44))
            Line((26.0215733943, -2.44), (31.01, -2.44))
            Line((31.01, -2.44), (31.11, -2.54))
            ThreePointArc((31.11, -2.54), (31.11, -4.87), (31.1097685321, -7.1932))
            Line((31.1097685321, -7.1932), (31.01, -7.2))
        make_face()
    extrude(amount=F3_T65_DEPTH)

    split(bisect_by=Plane.XY.offset(-64.0188739901), keep=Keep.BOTTOM)


with BuildPart() as f3_tool59_1:
    add(f3_tool59.part)

    # F3_t67: intersect F3_tool63
    add(f3_tool63.part, mode=Mode.INTERSECT)


with BuildPart() as f1_7:
    add(f1_6.part)

    # F3_t57: union F3_tool59
    add(f3_tool59_1.part)


with BuildPart() as f3_tool70:
    # F3_s71 → F3_t72 (new body)
    with BuildSketch(Plane.YZ.offset(43.4810665141)):
        with BuildLine():
            ThreePointArc((-7.2, 64.0188739901), (-3.8862348187, 62.4436570177), (-2.54, 59.0304473845))
            Line((-2.54, 59.0304473845), (-2.44, 59.0304473845))
            Line((-2.44, 59.0304473845), (-2.44, 64.0188739901))
            Line((-2.44, 64.0188739901), (-2.54, 64.1188739901))
            ThreePointArc((-2.54, 64.1188739901), (-4.87, 64.1188739901), (-7.1932, 64.1186425223))
            Line((-7.1932, 64.1186425223), (-7.2, 64.0188739901))
        make_face()
    extrude(amount=-F3_T72_DEPTH)

    split(bisect_by=Plane.YZ.offset(31.01), keep=Keep.TOP)


with BuildPart() as f3_tool74:
    # F3_s75 → F3_t76 (new body)
    with BuildSketch(Plane.XY.offset(-64.0188739901)):
        with BuildLine():
            ThreePointArc((31.01, -7.2), (29.4347830275, -3.8862348187), (26.0215733943, -2.54))
            Line((26.0215733943, -2.54), (26.0215733943, -2.44))
            Line((26.0215733943, -2.44), (31.01, -2.44))
            Line((31.01, -2.44), (31.11, -2.54))
            ThreePointArc((31.11, -2.54), (31.11, -4.87), (31.1097685321, -7.1932))
            Line((31.1097685321, -7.1932), (31.01, -7.2))
        make_face()
    extrude(amount=F3_T76_DEPTH)

    split(bisect_by=Plane.XY.offset(64.0188739901), keep=Keep.TOP)


with BuildPart() as f3_tool70_1:
    add(f3_tool70.part)

    # F3_t78: intersect F3_tool74
    add(f3_tool74.part, mode=Mode.INTERSECT)


with BuildPart() as f1_8:
    add(f1_7.part)

    # F3_t68: union F3_tool70
    add(f3_tool70_1.part)

    # F4 (on face) → F5 (cut, symmetric)
    with BuildSketch(Plane.XZ.offset(2.54)):
        with Locations((14.0573775861, 52.2131174803)):
            Rectangle(F4_W, F4_H)
    extrude(amount=F5_DEPTH, both=True, mode=Mode.SUBTRACT)

    # F6 (on face) → F7 (cut, symmetric)
    with BuildSketch(Plane(origin=(0, 0, -66.5588739901), x_dir=(1, 0, 0), z_dir=(0, 0, -1))):
        with Locations((1.078278327, 3.8627050212)):
            Rectangle(F6_W, F6_H)
    extrude(amount=F7_DEPTH, both=True, mode=Mode.SUBTRACT)


solid = f1_8.part
